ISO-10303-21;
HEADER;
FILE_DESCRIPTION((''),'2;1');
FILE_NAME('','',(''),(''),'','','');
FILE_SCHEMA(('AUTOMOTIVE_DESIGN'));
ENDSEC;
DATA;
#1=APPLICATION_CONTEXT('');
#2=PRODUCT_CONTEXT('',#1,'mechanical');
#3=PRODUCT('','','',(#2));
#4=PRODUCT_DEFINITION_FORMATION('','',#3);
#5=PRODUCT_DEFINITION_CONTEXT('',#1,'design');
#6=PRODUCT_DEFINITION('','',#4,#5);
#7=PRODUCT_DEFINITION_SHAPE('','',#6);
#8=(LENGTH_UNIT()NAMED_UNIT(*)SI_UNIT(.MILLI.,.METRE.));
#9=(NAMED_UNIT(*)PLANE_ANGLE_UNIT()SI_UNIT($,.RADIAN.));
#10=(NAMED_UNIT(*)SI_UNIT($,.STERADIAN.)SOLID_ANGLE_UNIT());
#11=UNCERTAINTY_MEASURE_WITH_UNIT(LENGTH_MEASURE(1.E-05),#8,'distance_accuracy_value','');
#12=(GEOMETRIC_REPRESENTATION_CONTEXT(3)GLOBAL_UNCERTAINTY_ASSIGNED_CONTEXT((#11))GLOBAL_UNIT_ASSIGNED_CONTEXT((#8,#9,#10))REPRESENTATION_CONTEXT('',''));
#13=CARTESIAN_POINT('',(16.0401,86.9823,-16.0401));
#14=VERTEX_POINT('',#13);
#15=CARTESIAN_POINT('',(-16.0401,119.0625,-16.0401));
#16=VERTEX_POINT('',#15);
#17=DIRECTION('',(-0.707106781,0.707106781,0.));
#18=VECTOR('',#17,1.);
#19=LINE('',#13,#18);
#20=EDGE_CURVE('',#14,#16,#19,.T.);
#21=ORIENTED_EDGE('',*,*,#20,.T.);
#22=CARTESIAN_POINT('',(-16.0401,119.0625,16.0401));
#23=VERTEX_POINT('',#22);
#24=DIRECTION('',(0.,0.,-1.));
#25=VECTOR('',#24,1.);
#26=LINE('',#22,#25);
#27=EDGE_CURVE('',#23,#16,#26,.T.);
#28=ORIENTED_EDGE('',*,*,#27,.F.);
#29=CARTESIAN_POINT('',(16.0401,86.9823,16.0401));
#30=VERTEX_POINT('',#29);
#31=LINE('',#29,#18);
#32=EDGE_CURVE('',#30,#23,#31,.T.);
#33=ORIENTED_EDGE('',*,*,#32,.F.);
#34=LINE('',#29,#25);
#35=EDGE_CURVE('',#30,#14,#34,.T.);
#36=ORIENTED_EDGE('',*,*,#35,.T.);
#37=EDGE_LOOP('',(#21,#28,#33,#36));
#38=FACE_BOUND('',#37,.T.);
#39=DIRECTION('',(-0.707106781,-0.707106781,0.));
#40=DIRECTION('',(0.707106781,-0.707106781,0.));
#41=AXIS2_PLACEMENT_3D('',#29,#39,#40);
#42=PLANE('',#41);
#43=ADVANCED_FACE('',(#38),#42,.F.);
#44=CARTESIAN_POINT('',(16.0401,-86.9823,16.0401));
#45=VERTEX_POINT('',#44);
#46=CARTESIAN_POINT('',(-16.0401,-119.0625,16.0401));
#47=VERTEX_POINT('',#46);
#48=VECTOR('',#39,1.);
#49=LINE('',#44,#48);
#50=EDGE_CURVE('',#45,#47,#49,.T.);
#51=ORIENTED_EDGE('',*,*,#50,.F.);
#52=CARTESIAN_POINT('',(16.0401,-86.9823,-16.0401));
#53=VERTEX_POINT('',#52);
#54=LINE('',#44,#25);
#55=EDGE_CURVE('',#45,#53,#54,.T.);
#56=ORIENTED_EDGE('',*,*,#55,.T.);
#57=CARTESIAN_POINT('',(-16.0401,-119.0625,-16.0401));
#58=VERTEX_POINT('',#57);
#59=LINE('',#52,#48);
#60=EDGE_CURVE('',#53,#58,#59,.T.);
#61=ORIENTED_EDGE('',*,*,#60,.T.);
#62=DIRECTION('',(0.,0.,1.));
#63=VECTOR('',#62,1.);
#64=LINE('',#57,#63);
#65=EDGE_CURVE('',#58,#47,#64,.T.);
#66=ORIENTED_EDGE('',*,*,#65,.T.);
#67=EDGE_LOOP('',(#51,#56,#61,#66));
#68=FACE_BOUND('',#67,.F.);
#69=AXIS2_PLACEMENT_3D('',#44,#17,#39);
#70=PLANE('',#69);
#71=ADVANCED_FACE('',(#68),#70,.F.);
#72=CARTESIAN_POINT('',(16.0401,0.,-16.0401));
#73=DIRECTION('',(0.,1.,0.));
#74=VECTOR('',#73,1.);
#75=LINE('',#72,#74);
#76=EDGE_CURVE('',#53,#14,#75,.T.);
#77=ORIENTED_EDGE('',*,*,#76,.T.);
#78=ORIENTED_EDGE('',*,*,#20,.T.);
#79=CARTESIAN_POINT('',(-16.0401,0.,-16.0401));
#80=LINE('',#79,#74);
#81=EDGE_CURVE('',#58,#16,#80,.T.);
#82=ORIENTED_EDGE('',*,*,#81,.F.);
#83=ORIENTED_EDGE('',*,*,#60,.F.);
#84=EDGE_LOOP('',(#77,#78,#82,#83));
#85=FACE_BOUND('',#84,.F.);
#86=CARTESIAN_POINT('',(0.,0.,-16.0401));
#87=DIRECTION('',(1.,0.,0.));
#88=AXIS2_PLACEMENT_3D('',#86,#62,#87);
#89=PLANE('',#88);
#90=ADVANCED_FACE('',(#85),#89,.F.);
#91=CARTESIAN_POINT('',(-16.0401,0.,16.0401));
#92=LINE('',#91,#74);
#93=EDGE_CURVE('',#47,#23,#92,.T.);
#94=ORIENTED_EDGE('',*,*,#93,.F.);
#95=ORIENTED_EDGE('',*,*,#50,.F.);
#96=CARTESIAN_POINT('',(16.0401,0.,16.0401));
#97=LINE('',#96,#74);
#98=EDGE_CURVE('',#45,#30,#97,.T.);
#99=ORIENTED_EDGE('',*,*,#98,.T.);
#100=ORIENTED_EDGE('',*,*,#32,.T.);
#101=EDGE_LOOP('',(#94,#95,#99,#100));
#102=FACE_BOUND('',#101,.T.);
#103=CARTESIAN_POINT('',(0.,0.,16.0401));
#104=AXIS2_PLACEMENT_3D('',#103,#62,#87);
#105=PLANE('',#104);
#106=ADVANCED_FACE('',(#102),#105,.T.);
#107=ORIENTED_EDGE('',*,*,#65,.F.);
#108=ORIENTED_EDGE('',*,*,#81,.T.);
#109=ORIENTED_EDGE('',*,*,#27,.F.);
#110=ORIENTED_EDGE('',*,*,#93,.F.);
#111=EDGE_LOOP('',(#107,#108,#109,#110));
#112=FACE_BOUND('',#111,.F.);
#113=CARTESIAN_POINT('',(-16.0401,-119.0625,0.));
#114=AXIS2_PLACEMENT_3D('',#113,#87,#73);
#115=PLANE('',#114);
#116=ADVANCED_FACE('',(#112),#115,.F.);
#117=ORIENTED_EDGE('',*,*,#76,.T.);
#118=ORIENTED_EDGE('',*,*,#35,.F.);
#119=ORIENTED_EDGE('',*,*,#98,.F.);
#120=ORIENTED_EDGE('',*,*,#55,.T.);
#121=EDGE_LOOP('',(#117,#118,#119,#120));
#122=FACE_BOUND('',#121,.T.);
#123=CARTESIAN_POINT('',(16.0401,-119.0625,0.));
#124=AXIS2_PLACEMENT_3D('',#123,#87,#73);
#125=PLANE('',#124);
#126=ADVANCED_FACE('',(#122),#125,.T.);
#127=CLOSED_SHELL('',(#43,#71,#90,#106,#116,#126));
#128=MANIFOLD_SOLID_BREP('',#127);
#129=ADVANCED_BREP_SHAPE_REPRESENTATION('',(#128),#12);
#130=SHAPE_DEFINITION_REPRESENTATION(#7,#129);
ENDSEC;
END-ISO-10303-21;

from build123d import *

# Parameters (mm, degrees)
F0_W     = 32.0802
F0_H     = 238.125
F1_DEPTH = 16.0401
F3_DEPTH = 32.0802


# Not quite as in the source:
# - a pattern or mirror of a feature is missing from the dataset's text; its kind, count and spacing are read off the source's solid


with BuildPart() as f1:
    # F0 (on Top) → F1 (new body, symmetric)
    with BuildSketch(Plane.XY):
        Rectangle(F0_W, F0_H)
    extrude(amount=F1_DEPTH, both=True)

    # F2 (on face) → F3 (cut, through all)
    with BuildSketch(Plane.XY.offset(16.0401)):
        Polygon((-16.0401, -119.0625), (16.0401, -119.0625), (16.0401, -86.9823), align=None)
    f3 = extrude(amount=-F3_DEPTH, mode=Mode.SUBTRACT)

    # F3_copies: F3 across plane
    add(f3.mirror(Plane.ZX), mode=Mode.SUBTRACT)


solid = f1.part
